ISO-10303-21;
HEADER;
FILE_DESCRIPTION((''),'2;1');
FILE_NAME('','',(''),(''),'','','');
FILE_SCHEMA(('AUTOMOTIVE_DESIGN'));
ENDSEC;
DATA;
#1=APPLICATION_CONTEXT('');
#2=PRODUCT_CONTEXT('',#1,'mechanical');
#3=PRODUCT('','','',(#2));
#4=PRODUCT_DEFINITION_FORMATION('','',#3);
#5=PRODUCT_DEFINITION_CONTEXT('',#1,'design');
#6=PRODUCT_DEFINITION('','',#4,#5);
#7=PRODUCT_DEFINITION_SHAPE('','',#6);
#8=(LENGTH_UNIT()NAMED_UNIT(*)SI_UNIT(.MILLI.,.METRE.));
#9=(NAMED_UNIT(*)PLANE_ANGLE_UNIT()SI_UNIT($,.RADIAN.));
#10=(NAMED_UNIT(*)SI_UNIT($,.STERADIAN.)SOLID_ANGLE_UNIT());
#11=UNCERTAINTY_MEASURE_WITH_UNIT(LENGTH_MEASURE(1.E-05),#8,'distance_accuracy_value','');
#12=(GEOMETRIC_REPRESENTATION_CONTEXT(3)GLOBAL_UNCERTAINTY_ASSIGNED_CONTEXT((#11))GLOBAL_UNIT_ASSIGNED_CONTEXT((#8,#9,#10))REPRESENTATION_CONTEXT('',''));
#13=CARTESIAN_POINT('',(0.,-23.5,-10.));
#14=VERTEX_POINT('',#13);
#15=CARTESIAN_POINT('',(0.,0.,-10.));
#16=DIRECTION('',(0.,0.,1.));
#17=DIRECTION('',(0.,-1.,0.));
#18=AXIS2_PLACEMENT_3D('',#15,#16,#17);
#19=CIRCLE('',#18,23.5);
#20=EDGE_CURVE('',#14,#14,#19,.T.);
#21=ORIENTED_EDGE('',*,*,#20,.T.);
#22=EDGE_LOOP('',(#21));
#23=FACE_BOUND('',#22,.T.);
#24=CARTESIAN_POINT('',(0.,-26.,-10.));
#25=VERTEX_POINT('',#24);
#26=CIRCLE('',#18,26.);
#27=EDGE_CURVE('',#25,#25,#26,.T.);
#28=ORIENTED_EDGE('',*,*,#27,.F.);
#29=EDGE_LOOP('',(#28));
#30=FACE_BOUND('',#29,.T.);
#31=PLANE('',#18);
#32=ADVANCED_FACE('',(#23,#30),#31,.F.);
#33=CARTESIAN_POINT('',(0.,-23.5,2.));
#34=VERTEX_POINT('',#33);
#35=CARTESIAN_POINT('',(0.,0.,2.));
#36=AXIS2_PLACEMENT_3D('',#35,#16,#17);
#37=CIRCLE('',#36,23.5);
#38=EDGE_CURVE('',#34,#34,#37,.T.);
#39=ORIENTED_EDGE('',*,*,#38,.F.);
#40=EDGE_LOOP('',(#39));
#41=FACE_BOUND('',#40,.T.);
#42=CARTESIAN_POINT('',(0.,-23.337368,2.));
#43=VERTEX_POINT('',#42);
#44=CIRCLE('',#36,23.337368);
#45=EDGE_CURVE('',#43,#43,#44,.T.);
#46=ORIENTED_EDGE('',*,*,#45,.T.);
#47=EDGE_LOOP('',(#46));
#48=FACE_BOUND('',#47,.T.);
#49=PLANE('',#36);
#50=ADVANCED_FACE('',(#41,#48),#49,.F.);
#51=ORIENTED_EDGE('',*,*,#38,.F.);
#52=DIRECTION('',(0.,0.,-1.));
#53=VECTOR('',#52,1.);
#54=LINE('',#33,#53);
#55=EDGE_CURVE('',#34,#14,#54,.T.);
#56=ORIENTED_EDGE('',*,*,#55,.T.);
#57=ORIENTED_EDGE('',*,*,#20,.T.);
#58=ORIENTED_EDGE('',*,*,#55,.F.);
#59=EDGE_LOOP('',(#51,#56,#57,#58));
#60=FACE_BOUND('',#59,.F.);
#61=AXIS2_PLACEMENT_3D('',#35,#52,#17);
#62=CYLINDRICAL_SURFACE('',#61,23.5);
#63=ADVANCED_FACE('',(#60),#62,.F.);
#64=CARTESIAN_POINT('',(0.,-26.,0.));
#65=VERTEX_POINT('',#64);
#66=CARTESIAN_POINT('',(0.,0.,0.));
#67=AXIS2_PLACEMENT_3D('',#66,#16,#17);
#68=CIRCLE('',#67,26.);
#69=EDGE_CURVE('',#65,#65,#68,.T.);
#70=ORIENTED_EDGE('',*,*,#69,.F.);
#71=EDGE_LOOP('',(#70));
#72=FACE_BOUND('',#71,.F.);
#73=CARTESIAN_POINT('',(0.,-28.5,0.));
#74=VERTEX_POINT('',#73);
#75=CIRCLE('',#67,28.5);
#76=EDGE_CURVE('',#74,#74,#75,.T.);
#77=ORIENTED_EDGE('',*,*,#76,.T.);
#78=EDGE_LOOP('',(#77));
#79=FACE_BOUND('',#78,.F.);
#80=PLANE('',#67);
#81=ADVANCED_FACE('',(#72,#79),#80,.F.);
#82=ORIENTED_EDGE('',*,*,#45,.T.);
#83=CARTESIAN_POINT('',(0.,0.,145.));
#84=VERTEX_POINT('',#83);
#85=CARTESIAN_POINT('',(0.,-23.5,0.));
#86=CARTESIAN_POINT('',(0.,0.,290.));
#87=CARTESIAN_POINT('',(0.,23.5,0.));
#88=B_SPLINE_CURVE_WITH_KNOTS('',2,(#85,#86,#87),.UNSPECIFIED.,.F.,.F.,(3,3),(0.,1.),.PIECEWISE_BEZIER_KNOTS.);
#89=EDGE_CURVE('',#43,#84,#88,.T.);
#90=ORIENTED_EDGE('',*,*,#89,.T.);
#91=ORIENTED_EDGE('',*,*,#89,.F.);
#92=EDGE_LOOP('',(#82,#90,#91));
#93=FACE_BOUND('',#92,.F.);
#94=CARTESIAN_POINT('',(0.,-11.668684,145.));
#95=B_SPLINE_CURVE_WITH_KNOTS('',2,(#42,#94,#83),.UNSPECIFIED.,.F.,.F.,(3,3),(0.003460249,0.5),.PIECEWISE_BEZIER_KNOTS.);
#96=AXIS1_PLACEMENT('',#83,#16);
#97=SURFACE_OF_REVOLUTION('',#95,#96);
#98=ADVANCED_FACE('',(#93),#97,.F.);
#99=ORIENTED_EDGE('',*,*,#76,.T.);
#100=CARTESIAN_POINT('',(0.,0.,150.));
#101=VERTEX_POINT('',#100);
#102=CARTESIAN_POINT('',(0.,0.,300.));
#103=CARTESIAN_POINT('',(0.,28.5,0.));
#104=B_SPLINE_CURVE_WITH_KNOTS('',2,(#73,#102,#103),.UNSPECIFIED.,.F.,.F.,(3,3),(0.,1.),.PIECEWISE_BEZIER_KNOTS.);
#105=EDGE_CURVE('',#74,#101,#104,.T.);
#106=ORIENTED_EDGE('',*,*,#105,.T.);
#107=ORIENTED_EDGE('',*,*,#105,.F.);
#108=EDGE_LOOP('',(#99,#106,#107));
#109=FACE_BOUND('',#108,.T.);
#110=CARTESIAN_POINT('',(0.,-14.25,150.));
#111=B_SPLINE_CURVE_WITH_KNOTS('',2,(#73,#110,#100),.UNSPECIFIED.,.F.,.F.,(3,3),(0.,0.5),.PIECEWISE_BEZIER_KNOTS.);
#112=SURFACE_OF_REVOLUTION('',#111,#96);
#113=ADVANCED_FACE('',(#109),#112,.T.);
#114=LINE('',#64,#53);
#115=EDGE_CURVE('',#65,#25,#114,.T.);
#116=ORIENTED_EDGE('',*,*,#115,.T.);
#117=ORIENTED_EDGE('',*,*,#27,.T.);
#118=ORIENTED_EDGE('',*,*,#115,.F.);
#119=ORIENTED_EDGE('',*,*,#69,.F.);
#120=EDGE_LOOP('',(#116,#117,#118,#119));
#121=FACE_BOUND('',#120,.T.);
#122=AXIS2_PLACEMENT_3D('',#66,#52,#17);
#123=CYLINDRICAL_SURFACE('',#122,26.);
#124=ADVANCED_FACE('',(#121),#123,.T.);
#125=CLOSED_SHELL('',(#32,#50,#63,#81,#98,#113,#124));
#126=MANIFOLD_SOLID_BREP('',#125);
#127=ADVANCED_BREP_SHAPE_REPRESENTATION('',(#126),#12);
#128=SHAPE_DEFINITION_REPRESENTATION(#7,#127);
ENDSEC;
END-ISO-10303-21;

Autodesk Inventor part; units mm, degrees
ref_plane "YZ Plane" through (0, 0, 0) normal (1, 0, 0) x (0, 1, 0)
ref_plane "XZ Plane" through (0, 0, 0) normal (0, 1, 0) x (-1, 0, 0)
ref_plane "XY Plane" through (0, 0, 0) normal (0, 0, 1) x (1, 0, 0)
sketch "Sketch2" plane through (0, 0, 0) normal (1, 0, 0) x (0, 1, 0)
  line L0 (0, 0) -> (26, 0)
  line L1 (26, 0) -> (26, -10)
  line L2 (0, 2) -> (23.5, 2)
  line L3 (0, 0) -> (-26, 0)
  line L4 (-26, 0) -> (-26, -10)
  line L5 (0, 2) -> (-23.5, 2)
  line L6 (0, 0) -> (0, 212.5)
  line L7 (0, 0) -> (0, 150)
  line L8 (23.5, 2) -> (23.5, 0)
  line L9 (-23.5, 2) -> (-23.5, 0)
  line L10 (0, 0) -> (0, 145)
  spline S0 degree 2 poles (28.5, 0) (0, 300) (-28.5, 0) knots 0 0 0 1 1 1
  spline S1 degree 2 poles (23.5, 0) (0, 290) (-23.5, 0) knots 0 0 0 1 1 1
  line L11 (0, 2) -> (-7.0238, 2)
  line L12 (0, 172) -> (0, 2)
  line L13 (0, 0) -> (-5, 0)
  line L14 (0, 212.5) -> (0, 0)
  line L15 (-7.0238, 2) -> (-15.0238, 2)
  line L16 (-23.5, 2) -> (-28.3094, 2)
  line L17 (0, -54.5) -> (0, 257) projected
  line L18 (23.5, 0) -> (23.5, -10)
  line L19 (23.5, -10) -> (26, -10)
  line L20 (-23.5, 0) -> (-23.5, -10)
  line L21 (-23.5, -10) -> (-26, -10)
  line L22 (28.5, 0) -> (26, 0)
  line L23 (-26, 0) -> (-28.5, 0)
  point P0 (0.3832, 149.9729)
  point P1 (28.3225, 1.8623)
  point P2 (23.3374, 2)
  point P3 (0, 2)
  point P4 (3, 2)
  point P5 (-23.3374, 2)
  dimension "d51" = 26
  dimension "d54" = 2
  dimension "d55" = 26
  dimension "d59" = 150
  dimension "d60" = 23.5
  dimension "d61" = 23.5
  dimension "d62" = 145
  dimension "d64" = 23.5
  dimension "d80" = 5
  dimension "d81" = 10
  dimension "d82" = 5
  dimension "d83" = 10
revolve "Revolution5" add sketch "Sketch2" angle 360 mid plane about axis through (0, 0, -10) along (0, 0, 1) contours L8 L2 S1 L6 S0 L22 L0 | L0 L1 L19 L18
properties part number "nose-basepart1" material "ABS Plastic"
